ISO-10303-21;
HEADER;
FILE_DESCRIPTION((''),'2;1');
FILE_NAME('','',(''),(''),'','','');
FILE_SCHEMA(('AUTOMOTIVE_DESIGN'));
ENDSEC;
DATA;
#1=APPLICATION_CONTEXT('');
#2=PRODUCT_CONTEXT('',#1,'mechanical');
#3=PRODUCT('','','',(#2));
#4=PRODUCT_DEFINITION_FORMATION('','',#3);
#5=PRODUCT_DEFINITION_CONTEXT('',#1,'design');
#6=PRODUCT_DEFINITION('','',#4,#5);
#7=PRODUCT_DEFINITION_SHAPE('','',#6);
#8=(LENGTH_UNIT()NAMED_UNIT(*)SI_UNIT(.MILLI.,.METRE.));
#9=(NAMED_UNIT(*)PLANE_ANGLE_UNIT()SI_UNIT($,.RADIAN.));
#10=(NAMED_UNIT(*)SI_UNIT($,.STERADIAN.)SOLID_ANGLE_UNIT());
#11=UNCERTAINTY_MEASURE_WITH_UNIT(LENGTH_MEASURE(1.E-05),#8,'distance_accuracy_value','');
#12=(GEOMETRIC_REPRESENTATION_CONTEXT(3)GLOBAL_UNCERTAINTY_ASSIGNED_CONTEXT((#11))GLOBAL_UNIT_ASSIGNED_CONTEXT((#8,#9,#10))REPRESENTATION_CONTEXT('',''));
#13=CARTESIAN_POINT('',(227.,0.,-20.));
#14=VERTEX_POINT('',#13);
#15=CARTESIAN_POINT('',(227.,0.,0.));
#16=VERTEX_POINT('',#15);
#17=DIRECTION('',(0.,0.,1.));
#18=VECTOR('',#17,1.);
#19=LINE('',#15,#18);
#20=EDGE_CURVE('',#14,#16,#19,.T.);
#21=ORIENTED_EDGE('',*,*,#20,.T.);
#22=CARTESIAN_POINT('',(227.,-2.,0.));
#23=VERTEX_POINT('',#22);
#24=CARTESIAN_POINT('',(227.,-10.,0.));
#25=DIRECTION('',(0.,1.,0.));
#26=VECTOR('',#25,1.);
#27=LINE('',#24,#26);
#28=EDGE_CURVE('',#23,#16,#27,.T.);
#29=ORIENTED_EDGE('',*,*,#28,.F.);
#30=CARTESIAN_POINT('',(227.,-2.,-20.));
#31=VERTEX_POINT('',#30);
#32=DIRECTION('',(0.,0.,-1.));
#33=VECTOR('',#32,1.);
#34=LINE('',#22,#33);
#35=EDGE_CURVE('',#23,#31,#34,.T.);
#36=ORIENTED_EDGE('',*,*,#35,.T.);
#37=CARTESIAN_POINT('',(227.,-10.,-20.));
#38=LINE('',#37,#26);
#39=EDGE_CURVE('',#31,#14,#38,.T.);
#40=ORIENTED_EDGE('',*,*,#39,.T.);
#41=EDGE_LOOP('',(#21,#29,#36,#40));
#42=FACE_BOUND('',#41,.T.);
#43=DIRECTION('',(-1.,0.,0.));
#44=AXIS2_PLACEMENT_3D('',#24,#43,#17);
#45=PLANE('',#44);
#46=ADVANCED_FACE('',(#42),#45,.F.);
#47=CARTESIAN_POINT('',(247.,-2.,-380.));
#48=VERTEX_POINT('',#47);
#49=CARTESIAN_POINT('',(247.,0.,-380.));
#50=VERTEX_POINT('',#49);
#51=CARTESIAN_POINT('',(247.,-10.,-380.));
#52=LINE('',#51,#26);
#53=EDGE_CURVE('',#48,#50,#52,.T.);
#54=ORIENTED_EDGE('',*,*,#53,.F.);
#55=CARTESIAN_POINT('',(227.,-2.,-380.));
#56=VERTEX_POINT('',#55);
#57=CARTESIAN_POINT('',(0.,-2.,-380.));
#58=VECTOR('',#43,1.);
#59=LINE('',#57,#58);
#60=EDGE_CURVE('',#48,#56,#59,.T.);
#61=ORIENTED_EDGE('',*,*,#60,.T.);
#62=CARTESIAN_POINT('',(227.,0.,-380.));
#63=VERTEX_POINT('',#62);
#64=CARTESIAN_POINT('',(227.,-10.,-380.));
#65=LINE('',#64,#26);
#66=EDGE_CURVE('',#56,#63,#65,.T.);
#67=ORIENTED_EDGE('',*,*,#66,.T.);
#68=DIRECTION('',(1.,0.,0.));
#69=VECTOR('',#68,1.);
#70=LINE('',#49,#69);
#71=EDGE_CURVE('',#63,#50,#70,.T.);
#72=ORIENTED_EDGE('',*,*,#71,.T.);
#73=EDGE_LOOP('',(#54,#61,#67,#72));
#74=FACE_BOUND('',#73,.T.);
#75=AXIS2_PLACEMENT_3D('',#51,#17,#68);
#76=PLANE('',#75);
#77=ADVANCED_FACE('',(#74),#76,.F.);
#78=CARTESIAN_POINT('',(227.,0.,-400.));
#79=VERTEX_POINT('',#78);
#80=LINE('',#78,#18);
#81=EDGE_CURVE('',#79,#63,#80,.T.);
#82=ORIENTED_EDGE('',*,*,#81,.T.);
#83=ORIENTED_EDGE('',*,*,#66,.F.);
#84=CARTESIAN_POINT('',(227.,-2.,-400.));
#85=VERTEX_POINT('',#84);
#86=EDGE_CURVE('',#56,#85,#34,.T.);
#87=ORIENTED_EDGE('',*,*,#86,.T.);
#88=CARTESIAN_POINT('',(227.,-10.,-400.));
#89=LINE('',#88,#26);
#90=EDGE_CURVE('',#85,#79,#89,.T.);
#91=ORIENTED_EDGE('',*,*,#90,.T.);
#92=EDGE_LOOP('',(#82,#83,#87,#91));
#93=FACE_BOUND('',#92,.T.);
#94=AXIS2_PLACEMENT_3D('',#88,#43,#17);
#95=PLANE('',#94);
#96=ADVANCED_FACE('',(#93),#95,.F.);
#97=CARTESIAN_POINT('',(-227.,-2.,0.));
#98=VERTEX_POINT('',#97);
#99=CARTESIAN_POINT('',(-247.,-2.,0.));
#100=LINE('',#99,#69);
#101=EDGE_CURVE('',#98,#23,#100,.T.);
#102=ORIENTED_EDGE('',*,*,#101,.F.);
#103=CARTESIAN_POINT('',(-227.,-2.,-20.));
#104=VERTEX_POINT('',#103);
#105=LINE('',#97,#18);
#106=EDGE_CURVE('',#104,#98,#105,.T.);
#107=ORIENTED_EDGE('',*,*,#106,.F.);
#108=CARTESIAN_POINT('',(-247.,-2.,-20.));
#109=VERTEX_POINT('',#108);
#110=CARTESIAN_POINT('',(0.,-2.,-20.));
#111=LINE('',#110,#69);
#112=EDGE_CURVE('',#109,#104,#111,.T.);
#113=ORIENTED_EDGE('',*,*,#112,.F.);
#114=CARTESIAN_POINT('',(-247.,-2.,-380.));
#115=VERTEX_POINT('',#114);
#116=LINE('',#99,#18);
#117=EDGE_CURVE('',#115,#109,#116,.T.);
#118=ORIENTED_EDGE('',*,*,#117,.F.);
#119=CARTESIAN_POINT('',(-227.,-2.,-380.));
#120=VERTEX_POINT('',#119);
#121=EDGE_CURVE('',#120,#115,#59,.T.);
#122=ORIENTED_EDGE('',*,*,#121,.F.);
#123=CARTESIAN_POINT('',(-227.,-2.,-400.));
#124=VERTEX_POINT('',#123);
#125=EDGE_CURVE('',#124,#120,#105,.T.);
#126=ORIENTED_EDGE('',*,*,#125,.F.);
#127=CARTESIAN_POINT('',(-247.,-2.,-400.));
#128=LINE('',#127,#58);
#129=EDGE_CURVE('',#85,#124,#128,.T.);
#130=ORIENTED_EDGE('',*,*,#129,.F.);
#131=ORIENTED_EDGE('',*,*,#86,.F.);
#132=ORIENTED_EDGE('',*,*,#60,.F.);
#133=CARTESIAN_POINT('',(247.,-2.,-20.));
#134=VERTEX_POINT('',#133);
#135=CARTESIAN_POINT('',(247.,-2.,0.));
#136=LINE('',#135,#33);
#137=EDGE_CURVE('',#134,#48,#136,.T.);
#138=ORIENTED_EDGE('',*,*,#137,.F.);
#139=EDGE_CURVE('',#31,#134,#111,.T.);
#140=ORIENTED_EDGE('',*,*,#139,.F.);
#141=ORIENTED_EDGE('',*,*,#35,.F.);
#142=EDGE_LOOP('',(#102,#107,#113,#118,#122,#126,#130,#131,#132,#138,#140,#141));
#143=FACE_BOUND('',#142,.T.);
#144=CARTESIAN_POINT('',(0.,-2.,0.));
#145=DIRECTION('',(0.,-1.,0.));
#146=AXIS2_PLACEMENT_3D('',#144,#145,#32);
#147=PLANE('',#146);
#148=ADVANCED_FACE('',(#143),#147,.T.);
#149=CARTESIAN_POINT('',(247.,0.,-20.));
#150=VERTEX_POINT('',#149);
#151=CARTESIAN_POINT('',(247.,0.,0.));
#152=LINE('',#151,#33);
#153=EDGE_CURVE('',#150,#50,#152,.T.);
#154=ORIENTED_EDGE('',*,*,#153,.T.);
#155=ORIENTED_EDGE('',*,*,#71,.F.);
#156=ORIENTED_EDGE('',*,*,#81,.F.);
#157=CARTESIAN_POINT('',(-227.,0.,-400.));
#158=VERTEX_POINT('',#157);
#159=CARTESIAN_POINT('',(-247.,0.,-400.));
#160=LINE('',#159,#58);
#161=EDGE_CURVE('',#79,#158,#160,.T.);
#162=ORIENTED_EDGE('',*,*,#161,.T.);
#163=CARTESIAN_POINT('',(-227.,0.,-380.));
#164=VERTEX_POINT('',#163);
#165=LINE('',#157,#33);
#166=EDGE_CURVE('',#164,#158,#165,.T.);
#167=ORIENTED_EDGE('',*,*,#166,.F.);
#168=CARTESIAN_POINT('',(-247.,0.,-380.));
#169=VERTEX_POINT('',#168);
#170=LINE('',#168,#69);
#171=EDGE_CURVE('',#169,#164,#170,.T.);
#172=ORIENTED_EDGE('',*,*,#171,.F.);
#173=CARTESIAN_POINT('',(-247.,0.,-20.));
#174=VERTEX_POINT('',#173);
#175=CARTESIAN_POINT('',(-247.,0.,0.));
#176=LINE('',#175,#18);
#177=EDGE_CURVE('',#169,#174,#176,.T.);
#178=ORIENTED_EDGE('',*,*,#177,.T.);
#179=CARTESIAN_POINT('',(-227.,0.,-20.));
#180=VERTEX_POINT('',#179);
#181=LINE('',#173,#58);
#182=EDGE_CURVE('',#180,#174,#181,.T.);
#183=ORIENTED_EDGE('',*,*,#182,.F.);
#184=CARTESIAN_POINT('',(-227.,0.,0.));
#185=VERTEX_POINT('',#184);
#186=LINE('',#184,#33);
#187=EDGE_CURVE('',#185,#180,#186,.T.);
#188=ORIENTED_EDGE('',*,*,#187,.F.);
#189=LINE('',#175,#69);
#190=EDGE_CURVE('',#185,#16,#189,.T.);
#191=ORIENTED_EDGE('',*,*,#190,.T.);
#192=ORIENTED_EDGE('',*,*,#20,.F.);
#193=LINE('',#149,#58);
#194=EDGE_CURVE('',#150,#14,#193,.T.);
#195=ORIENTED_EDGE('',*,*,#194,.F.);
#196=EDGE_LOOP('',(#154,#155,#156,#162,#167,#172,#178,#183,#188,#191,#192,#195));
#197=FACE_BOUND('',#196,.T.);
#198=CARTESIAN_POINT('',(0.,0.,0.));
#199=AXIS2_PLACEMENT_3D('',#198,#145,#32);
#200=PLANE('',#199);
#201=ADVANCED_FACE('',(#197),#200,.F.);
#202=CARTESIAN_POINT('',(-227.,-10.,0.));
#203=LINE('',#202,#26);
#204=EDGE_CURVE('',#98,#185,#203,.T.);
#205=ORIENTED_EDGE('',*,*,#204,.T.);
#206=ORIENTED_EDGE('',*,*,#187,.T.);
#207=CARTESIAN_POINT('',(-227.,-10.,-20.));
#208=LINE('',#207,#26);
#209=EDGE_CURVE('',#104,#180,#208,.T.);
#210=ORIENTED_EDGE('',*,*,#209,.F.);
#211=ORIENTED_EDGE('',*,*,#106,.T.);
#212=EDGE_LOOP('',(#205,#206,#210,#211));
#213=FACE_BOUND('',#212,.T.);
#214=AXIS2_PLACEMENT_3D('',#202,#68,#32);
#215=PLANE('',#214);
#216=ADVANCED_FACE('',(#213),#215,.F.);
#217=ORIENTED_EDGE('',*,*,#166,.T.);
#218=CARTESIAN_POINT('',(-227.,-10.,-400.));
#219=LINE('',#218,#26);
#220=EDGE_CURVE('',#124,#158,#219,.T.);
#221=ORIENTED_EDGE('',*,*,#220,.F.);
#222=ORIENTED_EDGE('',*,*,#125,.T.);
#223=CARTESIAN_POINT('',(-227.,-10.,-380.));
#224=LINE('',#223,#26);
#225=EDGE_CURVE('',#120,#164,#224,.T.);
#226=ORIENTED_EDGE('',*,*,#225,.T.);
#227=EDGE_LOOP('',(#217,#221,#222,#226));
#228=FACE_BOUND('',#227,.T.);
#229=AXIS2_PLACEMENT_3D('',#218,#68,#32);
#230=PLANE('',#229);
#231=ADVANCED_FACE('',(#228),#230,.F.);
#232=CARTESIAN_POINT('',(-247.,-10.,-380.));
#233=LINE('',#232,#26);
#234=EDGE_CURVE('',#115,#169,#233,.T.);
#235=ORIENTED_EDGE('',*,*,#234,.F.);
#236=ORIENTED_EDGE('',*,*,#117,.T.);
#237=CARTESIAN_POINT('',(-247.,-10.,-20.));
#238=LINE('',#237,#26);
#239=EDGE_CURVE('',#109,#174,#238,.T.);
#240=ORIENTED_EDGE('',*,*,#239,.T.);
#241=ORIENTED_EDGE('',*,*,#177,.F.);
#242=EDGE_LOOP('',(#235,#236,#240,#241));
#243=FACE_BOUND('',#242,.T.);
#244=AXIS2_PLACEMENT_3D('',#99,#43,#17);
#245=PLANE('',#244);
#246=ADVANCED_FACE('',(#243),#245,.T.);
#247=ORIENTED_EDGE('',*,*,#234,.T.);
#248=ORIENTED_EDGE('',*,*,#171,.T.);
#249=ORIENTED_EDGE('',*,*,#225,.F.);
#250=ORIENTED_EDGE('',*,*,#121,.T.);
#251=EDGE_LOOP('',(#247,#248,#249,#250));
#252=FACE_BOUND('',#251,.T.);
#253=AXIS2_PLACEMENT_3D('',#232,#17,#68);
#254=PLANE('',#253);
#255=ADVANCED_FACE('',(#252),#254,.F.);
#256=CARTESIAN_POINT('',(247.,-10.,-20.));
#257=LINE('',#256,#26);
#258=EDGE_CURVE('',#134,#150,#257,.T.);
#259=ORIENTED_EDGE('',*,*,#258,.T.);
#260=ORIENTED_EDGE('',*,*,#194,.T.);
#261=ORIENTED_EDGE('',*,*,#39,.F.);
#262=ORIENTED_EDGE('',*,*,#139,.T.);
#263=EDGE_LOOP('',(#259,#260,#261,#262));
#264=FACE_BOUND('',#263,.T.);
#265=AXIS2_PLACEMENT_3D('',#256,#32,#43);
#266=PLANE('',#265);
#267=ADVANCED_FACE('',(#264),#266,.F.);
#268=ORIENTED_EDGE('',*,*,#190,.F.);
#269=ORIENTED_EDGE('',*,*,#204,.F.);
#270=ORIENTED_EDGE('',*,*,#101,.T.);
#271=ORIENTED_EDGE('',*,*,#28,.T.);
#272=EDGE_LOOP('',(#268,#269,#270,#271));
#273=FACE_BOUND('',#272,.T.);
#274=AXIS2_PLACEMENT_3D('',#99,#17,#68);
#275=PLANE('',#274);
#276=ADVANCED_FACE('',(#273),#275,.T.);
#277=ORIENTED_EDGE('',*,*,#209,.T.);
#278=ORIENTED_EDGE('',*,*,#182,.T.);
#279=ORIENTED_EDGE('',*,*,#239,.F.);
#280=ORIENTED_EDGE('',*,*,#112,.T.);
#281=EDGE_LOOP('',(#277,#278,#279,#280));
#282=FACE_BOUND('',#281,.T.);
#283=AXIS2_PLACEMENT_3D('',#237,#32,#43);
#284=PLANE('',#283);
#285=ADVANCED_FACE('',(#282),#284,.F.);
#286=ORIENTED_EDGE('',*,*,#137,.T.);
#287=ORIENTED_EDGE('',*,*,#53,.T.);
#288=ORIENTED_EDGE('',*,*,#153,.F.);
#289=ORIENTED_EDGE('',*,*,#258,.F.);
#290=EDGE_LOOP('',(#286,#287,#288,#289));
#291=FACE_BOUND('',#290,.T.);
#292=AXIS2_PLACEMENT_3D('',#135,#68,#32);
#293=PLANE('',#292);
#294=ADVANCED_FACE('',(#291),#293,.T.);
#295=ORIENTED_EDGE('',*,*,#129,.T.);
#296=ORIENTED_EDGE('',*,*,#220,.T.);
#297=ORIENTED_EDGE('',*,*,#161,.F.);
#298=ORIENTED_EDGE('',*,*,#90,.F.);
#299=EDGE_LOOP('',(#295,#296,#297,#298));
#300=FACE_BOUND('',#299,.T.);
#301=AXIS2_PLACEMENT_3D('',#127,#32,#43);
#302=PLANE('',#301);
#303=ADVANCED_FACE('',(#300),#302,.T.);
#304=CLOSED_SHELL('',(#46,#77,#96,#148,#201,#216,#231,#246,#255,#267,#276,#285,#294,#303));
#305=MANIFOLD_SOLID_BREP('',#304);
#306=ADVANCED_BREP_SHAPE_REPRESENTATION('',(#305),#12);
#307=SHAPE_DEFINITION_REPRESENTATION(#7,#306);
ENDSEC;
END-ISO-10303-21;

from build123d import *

# Parameters (mm, degrees)
SKETCH2_W          = 494
SKETCH2_H          = 400
BASE_FLANGE1_DEPTH = 2
SKETCH7_W          = 20
SKETCH7_H          = 20
CUT_EXTRUDE1_DEPTH = 10


# Sheet-metal steps are written as plain solids
with BuildPart() as part:
    # Sketch2 → Base-Flange1 (new body)
    with BuildSketch(Plane(origin=(0, 0, 0), x_dir=(1, 0, 0), z_dir=(0, 1, 0))):
        with Locations((0, 200)):
            Rectangle(SKETCH2_W, SKETCH2_H)
    extrude(amount=-BASE_FLANGE1_DEPTH)

    # Sketch7 → Cut-Extrude1 (cut)
    with BuildSketch(Plane(origin=(0, 0, 0), x_dir=(1, 0, 0), z_dir=(0, 1, 0))):
        with Locations((-237, 390)):
            Rectangle(SKETCH7_W, SKETCH7_H)
        with Locations((-237, 10)):
            Rectangle(SKETCH7_W, SKETCH7_H)
        with Locations((237, 10)):
            Rectangle(SKETCH7_W, SKETCH7_H)
        with Locations((237, 390)):
            Rectangle(SKETCH7_W, SKETCH7_H)
    extrude(amount=-CUT_EXTRUDE1_DEPTH, mode=Mode.SUBTRACT)


solid = part.part
